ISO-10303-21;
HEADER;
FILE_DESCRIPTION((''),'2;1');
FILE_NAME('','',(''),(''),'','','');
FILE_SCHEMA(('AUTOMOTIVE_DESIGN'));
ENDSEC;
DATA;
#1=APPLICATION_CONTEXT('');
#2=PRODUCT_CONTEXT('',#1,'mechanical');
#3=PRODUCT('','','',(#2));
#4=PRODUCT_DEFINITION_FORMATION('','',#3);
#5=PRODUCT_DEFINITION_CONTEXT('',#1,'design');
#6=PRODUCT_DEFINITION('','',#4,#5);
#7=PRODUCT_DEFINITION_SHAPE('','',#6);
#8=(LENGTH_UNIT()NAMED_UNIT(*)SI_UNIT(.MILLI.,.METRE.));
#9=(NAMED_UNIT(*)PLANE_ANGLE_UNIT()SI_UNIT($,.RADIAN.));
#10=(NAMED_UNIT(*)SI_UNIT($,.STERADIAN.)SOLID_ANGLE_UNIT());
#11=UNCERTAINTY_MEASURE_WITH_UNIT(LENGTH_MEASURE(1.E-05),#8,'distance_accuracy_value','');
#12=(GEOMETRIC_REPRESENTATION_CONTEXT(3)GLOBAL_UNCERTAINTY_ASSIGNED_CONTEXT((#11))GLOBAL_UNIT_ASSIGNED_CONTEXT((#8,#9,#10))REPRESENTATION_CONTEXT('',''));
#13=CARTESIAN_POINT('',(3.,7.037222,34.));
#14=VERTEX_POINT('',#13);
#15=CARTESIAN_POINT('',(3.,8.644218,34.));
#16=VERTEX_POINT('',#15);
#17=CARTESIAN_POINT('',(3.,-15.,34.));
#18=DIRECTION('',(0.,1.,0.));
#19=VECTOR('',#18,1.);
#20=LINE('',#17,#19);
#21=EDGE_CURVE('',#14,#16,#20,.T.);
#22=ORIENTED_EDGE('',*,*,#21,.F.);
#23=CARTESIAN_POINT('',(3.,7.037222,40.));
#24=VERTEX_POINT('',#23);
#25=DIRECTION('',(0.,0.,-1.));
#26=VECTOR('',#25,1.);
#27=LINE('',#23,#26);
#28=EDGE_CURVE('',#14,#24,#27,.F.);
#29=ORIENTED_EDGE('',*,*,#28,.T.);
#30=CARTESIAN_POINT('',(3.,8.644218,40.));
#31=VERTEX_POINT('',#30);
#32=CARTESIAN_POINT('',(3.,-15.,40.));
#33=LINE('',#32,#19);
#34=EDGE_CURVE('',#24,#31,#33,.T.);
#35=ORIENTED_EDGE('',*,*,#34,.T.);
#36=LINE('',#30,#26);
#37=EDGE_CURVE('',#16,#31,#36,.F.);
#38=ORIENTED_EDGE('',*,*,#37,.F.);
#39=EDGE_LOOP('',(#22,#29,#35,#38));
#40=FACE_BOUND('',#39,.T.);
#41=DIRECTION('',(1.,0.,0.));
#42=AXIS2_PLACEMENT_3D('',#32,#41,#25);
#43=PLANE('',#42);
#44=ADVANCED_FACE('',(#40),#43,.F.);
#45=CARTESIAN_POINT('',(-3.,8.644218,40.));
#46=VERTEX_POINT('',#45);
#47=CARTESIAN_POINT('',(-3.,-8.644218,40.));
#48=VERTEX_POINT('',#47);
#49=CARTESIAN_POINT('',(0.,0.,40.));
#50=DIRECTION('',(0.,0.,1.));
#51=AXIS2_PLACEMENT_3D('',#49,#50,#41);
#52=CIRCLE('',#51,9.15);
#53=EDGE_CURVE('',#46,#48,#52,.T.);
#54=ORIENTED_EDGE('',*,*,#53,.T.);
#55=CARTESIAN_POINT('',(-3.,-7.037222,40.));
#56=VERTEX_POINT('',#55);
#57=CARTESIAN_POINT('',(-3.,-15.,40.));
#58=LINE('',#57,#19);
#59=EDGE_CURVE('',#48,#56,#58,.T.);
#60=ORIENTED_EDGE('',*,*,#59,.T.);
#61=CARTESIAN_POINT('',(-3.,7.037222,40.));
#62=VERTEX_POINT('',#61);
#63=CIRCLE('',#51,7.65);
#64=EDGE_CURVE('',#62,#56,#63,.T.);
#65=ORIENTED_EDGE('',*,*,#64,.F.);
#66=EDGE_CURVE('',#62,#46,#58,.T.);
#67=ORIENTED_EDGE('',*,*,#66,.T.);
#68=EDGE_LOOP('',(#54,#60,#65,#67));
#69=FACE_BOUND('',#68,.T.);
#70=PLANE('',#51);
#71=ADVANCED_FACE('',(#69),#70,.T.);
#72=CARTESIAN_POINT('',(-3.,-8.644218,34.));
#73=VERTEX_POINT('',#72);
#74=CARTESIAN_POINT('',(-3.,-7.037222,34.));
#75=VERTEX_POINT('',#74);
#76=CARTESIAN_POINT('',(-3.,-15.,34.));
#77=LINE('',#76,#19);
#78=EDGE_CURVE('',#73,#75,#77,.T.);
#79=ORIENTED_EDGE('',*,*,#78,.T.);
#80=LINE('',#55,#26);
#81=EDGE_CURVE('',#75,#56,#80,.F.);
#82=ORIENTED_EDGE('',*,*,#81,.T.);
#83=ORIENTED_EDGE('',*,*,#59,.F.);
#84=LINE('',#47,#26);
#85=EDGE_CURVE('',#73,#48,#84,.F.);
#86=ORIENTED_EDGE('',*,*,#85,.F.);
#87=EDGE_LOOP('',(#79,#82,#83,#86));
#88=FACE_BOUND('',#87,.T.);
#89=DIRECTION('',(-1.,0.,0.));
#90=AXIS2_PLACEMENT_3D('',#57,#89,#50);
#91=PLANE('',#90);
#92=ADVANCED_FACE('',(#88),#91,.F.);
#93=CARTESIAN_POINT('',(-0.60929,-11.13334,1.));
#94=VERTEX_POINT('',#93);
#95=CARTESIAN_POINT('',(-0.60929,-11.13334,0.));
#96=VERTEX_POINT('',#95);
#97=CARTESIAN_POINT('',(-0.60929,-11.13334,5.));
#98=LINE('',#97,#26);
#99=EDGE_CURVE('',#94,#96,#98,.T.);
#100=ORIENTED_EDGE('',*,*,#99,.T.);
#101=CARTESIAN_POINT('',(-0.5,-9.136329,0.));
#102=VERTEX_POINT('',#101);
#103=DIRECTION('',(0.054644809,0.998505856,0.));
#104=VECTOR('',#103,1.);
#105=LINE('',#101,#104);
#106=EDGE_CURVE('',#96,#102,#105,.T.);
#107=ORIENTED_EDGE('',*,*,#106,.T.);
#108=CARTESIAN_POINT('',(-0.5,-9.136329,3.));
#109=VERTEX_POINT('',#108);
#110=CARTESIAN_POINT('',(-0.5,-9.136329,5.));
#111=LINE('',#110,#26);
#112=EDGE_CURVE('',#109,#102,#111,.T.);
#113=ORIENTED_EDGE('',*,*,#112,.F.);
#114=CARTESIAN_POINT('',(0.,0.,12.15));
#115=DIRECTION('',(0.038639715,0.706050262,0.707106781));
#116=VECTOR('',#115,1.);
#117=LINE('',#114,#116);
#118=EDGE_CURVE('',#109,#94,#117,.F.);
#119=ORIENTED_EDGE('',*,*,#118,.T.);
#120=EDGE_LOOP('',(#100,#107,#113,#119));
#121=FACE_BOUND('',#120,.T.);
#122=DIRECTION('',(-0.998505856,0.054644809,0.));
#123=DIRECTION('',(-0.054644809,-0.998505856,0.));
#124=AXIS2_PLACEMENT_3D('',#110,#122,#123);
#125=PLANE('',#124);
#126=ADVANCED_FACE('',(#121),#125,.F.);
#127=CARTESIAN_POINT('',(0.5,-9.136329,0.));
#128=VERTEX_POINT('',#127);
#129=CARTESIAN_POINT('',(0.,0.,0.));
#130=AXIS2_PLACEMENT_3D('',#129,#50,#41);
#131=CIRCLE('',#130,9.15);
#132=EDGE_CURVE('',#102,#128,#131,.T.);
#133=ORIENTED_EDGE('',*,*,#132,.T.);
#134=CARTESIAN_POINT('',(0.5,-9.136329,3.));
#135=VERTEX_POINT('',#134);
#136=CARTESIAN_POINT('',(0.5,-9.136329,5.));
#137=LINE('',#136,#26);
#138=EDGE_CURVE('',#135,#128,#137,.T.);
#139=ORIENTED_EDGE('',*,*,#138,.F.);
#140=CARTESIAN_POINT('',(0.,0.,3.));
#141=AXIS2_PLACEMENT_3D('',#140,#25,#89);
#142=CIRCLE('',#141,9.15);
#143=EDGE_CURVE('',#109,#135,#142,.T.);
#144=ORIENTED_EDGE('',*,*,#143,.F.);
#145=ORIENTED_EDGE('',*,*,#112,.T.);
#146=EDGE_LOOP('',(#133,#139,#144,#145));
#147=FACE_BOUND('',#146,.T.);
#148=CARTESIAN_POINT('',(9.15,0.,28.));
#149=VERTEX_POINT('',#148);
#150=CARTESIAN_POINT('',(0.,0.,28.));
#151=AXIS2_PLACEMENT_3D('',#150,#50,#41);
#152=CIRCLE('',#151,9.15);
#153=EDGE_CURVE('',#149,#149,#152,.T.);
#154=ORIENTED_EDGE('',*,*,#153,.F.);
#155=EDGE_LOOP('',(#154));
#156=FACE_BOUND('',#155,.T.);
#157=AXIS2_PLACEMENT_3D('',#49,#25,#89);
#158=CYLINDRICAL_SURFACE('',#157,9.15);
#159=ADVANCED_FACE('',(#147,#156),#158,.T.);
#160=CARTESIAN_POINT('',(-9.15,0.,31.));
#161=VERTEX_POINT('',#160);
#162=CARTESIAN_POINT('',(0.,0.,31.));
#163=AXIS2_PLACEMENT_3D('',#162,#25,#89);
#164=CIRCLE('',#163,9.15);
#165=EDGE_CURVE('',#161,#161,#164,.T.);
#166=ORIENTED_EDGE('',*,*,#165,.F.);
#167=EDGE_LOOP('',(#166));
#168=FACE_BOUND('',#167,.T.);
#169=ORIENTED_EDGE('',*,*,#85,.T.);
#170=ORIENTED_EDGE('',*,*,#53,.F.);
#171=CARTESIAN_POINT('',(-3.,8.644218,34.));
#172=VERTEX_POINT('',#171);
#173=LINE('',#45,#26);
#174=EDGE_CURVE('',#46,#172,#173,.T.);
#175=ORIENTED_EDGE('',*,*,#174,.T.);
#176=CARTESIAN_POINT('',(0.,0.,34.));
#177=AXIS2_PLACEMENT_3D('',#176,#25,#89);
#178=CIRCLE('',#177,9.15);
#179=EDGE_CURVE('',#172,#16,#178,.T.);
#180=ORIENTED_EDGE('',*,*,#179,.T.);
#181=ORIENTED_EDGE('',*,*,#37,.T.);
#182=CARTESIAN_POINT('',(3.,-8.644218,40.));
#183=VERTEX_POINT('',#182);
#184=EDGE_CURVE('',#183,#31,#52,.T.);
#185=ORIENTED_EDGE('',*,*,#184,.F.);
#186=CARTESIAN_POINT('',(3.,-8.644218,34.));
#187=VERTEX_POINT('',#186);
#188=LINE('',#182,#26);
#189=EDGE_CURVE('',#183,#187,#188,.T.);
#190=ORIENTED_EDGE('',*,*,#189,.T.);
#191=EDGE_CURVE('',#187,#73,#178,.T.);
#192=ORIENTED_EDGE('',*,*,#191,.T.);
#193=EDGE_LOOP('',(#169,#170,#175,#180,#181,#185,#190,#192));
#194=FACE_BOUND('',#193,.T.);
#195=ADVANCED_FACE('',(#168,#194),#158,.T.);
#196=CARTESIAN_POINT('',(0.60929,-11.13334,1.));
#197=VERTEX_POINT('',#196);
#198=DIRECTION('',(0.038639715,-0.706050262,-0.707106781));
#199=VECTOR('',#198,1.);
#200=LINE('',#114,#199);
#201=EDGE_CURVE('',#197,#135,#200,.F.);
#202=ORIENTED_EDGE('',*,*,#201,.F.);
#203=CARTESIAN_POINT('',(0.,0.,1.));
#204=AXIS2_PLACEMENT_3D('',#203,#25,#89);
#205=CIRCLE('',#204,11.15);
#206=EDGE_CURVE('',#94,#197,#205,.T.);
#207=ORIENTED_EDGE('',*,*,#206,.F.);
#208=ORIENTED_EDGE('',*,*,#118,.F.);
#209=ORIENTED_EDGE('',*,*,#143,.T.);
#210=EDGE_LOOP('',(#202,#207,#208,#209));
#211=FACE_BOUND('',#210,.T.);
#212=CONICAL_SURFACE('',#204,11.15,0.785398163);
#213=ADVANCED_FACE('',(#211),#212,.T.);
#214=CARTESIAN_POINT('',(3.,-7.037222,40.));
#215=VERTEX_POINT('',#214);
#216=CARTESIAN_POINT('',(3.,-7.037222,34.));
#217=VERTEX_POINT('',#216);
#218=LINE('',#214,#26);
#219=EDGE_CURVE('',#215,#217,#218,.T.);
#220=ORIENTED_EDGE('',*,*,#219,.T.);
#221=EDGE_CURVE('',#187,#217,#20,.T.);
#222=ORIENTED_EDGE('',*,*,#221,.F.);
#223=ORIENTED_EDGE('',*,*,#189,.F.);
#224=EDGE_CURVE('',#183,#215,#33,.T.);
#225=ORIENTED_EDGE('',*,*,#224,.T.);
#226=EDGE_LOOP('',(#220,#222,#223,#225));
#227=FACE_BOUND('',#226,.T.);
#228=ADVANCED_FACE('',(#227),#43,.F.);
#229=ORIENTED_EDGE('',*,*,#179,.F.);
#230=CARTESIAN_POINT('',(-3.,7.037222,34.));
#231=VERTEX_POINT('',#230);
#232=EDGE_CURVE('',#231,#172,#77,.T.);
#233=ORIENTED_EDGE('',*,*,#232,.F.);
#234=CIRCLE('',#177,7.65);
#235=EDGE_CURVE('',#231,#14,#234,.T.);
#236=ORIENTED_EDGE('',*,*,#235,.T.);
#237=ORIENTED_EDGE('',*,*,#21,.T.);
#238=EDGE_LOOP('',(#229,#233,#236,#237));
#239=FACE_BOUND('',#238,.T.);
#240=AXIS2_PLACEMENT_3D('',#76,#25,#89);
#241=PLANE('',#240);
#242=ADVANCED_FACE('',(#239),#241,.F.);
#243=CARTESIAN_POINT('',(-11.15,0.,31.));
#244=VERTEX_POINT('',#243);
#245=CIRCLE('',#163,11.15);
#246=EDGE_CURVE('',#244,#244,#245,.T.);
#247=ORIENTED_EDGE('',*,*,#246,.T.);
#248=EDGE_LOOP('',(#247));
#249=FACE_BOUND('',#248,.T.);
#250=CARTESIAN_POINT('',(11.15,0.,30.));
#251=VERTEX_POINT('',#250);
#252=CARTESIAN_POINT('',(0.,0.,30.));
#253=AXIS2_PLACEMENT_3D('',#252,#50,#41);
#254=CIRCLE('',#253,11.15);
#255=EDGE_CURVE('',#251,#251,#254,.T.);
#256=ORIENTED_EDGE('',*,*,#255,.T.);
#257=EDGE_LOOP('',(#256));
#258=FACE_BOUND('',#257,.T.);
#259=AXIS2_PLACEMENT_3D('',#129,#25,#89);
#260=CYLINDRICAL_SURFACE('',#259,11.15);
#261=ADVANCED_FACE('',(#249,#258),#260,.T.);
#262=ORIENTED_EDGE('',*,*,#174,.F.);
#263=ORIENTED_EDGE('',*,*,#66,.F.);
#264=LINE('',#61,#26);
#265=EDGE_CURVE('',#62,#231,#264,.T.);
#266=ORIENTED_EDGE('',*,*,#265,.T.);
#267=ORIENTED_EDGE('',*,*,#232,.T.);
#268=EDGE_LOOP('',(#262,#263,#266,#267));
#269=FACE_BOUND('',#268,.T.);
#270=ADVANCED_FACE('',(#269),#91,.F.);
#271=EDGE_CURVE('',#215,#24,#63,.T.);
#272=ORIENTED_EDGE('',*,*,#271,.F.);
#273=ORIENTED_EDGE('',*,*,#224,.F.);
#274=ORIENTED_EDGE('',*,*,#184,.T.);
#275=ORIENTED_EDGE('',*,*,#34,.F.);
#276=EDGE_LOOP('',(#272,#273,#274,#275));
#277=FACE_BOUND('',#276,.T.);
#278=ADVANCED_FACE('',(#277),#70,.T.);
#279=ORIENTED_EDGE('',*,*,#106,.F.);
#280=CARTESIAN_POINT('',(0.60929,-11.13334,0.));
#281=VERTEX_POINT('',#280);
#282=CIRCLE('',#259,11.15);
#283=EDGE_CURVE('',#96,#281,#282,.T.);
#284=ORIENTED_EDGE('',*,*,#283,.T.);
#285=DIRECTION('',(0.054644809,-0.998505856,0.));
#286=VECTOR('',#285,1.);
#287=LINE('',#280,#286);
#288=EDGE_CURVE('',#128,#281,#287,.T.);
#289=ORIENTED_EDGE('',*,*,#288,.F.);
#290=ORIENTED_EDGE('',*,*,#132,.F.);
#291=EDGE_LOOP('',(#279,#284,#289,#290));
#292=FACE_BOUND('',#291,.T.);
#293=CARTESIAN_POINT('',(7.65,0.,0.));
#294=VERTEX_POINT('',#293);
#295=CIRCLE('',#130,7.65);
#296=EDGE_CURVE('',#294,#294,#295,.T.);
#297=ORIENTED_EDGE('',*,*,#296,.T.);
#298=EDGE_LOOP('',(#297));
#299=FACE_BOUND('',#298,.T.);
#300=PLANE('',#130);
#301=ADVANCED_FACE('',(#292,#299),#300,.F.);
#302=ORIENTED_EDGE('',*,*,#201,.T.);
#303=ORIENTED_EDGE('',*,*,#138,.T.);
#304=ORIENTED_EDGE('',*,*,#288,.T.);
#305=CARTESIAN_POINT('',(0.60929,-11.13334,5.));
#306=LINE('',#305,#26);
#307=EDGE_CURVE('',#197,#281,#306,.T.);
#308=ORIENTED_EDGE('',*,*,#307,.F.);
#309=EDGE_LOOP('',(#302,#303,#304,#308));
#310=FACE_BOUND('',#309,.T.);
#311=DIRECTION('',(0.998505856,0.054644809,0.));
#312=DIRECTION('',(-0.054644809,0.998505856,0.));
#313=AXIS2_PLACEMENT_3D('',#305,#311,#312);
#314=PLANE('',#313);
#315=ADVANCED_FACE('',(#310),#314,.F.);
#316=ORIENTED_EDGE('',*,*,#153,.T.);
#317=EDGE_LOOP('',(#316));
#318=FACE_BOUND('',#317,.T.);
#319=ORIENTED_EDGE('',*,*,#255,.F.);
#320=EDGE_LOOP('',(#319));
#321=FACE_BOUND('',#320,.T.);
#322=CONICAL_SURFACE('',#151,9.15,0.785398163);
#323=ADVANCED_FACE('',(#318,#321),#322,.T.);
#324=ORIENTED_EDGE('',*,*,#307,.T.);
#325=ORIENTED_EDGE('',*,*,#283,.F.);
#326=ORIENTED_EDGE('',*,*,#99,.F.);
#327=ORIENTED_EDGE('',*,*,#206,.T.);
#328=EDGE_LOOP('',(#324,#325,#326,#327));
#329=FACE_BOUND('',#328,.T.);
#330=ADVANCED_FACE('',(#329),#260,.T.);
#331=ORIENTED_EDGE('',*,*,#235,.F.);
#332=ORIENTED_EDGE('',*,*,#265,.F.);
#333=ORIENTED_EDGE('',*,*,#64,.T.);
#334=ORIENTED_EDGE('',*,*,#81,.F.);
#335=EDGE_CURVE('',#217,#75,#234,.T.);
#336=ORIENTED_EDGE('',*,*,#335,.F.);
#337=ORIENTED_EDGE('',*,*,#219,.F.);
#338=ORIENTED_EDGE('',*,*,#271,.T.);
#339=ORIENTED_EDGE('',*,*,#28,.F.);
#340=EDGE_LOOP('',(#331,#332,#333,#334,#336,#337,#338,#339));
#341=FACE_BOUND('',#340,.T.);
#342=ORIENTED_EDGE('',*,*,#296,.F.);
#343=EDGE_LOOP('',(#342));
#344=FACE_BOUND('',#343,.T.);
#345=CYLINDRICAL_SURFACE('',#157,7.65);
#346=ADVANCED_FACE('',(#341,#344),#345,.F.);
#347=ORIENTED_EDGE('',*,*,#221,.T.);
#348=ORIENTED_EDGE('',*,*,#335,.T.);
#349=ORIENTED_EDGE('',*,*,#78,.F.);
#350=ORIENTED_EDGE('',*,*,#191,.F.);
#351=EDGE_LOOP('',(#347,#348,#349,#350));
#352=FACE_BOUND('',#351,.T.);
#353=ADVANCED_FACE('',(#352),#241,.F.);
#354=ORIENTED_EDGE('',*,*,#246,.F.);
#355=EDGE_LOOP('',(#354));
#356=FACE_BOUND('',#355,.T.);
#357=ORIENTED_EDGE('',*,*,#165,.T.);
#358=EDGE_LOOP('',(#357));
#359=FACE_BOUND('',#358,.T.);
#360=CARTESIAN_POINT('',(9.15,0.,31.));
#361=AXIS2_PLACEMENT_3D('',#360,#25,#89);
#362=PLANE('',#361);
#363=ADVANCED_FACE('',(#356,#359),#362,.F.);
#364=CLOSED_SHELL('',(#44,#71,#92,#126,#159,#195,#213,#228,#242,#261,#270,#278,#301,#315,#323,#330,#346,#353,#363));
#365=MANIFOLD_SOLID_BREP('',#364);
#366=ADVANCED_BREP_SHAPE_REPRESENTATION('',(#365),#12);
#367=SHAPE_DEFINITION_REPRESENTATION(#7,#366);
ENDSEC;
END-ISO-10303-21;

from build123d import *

# Parameters (mm, degrees)
SKETCH1_R           = 9.15
SKETCH1_R_2         = 7.65
BOSS_EXTRUDE1_DEPTH = 40
SKETCH2_W           = 6
SKETCH2_H           = 6
CUT_EXTRUDE1_DEPTH  = 15
SKETCH3_W           = 2
SKETCH3_H           = 3
CHAMFER1_SIZE       = 2
CUT_EXTRUDE2_DEPTH  = 5


with BuildPart() as part:
    # Sketch1 → Boss-Extrude1 (new body)
    with BuildSketch(Plane.XY):
        Circle(SKETCH1_R)
        Circle(SKETCH1_R_2, mode=Mode.SUBTRACT)
    extrude(amount=BOSS_EXTRUDE1_DEPTH)

    # Sketch2 → Cut-Extrude1 (cut, symmetric)
    with BuildSketch(Plane(origin=(0, 0, 0), x_dir=(1, 0, 0), z_dir=(0, 1, 0))):
        with Locations((0, -37)):
            Rectangle(SKETCH2_W, SKETCH2_H)
    extrude(amount=CUT_EXTRUDE1_DEPTH, both=True, mode=Mode.SUBTRACT)

    # Sketch3 → Revolve1 (revolve)
    with BuildSketch(Plane(origin=(0, 0, 0), x_dir=(1, 0, 0), z_dir=(0, 1, 0)), mode=Mode.PRIVATE) as revolve1_sk:
        with Locations((10.15, -29.5)):
            Rectangle(SKETCH3_W, SKETCH3_H)
        with Locations((10.15, -1.5)):
            Rectangle(SKETCH3_W, SKETCH3_H)
    revolve(revolve1_sk.sketch.rotate(Axis((0, 0, 0), (0, 0, 1)), 180), axis=Axis((0, 0, 0), (0, 0, 1)))

    # Chamfer1
    chamfer1_edges = [part.edges().sort_by_distance(p)[0] for p in [
        (11.15, 0, 28),
        (11.15, 0, 3),
    ]]
    chamfer(chamfer1_edges, length=CHAMFER1_SIZE - 0.0001)  # a hair under: the kernel refuses the full size

    # Sketch4 → Cut-Extrude2 (cut)
    with BuildSketch(Plane(origin=(0, 0, 0), x_dir=(-1, 0, 0), z_dir=(0, 0, -1))):
        with BuildLine():
            Line((0.5, -9.136328584), (0.609289617, -11.133340297))
            ThreePointArc((0.609289617, -11.133340297), (0, -11.15), (-0.609289617, -11.133340297))
            Line((-0.609289617, -11.133340297), (-0.5, -9.136328584))
            ThreePointArc((-0.5, -9.136328584), (0, -9.15), (0.5, -9.136328584))
        make_face()
    extrude(amount=-CUT_EXTRUDE2_DEPTH, mode=Mode.SUBTRACT)


solid = part.part
